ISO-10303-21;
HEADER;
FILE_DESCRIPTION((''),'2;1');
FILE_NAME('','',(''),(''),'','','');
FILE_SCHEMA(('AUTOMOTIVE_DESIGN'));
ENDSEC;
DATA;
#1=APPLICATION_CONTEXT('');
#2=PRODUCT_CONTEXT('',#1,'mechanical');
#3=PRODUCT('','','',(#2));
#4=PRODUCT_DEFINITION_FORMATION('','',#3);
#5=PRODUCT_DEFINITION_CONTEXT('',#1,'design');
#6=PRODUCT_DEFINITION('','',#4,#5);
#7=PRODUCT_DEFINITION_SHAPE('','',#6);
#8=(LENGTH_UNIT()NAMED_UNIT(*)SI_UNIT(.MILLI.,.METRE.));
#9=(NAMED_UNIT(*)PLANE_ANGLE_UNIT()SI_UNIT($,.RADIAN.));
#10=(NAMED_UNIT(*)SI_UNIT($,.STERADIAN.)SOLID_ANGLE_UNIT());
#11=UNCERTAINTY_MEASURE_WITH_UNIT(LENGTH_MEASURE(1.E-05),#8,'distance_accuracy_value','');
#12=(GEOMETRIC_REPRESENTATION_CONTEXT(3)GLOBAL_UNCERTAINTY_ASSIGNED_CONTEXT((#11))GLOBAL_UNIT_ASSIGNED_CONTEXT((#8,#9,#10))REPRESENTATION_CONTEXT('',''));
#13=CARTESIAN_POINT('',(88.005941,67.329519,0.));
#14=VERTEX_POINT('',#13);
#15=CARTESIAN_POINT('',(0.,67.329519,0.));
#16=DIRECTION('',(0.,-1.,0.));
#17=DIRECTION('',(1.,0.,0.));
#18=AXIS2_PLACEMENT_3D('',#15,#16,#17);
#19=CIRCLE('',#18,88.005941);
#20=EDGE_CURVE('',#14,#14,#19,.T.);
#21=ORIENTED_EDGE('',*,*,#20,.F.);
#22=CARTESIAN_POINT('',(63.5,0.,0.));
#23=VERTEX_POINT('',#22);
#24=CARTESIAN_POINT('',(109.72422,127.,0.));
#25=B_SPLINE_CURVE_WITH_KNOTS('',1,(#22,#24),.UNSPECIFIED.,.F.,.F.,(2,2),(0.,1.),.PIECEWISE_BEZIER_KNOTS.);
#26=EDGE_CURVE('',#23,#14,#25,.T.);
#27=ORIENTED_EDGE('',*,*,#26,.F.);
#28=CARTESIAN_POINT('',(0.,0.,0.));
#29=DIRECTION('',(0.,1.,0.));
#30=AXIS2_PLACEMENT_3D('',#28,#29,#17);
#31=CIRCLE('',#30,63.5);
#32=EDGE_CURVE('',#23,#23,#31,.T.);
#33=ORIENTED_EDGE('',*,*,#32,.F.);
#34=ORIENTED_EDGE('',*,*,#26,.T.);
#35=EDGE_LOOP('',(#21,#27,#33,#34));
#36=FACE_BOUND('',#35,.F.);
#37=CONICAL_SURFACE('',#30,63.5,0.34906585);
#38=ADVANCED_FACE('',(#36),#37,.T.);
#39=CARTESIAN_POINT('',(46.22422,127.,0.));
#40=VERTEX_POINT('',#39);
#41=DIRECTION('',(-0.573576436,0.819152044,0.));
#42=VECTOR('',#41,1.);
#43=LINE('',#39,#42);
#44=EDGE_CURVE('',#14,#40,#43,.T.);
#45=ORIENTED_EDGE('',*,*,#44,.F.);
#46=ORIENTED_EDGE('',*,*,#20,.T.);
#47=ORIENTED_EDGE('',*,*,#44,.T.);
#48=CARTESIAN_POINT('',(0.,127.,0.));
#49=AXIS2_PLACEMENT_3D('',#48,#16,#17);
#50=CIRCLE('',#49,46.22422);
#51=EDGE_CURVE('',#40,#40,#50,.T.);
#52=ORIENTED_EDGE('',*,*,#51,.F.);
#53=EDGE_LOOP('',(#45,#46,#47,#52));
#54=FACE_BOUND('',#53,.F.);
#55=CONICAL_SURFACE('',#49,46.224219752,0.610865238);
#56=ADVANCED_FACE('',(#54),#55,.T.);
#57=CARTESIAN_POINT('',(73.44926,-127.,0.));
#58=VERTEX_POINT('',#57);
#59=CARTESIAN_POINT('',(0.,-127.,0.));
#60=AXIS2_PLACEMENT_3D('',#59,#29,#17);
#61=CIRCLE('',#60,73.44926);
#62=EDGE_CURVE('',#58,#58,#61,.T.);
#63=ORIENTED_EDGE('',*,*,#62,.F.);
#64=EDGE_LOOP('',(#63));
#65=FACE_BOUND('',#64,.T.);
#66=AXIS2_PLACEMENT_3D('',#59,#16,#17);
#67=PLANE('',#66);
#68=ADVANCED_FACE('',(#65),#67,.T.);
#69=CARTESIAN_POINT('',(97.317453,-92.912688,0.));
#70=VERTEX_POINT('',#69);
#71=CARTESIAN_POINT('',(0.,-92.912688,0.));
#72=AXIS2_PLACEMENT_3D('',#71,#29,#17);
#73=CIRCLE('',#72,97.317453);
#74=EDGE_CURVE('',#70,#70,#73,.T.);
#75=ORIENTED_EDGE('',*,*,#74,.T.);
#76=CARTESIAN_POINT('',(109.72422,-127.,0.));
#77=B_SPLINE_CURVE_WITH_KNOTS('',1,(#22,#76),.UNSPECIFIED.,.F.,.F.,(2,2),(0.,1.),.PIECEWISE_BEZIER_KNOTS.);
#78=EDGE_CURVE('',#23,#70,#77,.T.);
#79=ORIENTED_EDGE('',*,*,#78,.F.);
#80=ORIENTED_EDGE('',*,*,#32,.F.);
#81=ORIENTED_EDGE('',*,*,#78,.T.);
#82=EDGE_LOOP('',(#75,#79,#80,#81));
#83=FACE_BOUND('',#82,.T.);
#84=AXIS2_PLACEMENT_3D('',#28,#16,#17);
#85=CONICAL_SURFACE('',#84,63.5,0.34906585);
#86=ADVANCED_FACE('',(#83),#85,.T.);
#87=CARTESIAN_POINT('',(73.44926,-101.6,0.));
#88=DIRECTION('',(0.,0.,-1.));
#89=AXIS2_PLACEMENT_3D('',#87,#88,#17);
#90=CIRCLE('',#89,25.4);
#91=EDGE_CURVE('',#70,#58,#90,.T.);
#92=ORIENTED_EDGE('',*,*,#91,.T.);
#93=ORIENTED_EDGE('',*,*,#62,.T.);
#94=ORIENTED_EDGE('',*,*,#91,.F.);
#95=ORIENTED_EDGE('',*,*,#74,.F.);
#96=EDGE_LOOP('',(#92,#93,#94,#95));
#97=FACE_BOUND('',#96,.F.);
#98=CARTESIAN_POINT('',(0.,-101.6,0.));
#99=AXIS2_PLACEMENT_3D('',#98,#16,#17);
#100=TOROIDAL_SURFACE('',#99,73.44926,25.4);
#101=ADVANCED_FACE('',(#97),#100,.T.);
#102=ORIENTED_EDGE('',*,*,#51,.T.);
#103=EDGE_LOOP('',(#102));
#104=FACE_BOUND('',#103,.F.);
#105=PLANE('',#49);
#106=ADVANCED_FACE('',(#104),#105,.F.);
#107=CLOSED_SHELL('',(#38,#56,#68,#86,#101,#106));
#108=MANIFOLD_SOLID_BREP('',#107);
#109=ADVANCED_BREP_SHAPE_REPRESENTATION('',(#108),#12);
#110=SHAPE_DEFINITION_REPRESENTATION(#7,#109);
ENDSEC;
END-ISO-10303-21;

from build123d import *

# Parameters (mm, degrees)
F0_R     = 63.5
F1_DEPTH = 127
F1_TAPER = -20
F2_SIZE  = 63.5
F3_R     = 25.4


with BuildPart() as f1:
    # F0 (on Front) → F1 (new body, symmetric)
    with BuildSketch(Plane.XZ):
        Circle(F0_R)
    extrude(amount=F1_DEPTH, both=True, taper=F1_TAPER)

    # F2
    f2_edges = [f1.edges().sort_by_distance(p)[0] for p in [
        (-109.72422, 127, 0),
    ]]
    chamfer(f2_edges, length=F2_SIZE)

    # F3
    f3_edges = [f1.edges().sort_by_distance(p)[0] for p in [
        (-109.72422, -127, 0),
    ]]
    fillet(f3_edges, radius=F3_R)


solid = f1.part
